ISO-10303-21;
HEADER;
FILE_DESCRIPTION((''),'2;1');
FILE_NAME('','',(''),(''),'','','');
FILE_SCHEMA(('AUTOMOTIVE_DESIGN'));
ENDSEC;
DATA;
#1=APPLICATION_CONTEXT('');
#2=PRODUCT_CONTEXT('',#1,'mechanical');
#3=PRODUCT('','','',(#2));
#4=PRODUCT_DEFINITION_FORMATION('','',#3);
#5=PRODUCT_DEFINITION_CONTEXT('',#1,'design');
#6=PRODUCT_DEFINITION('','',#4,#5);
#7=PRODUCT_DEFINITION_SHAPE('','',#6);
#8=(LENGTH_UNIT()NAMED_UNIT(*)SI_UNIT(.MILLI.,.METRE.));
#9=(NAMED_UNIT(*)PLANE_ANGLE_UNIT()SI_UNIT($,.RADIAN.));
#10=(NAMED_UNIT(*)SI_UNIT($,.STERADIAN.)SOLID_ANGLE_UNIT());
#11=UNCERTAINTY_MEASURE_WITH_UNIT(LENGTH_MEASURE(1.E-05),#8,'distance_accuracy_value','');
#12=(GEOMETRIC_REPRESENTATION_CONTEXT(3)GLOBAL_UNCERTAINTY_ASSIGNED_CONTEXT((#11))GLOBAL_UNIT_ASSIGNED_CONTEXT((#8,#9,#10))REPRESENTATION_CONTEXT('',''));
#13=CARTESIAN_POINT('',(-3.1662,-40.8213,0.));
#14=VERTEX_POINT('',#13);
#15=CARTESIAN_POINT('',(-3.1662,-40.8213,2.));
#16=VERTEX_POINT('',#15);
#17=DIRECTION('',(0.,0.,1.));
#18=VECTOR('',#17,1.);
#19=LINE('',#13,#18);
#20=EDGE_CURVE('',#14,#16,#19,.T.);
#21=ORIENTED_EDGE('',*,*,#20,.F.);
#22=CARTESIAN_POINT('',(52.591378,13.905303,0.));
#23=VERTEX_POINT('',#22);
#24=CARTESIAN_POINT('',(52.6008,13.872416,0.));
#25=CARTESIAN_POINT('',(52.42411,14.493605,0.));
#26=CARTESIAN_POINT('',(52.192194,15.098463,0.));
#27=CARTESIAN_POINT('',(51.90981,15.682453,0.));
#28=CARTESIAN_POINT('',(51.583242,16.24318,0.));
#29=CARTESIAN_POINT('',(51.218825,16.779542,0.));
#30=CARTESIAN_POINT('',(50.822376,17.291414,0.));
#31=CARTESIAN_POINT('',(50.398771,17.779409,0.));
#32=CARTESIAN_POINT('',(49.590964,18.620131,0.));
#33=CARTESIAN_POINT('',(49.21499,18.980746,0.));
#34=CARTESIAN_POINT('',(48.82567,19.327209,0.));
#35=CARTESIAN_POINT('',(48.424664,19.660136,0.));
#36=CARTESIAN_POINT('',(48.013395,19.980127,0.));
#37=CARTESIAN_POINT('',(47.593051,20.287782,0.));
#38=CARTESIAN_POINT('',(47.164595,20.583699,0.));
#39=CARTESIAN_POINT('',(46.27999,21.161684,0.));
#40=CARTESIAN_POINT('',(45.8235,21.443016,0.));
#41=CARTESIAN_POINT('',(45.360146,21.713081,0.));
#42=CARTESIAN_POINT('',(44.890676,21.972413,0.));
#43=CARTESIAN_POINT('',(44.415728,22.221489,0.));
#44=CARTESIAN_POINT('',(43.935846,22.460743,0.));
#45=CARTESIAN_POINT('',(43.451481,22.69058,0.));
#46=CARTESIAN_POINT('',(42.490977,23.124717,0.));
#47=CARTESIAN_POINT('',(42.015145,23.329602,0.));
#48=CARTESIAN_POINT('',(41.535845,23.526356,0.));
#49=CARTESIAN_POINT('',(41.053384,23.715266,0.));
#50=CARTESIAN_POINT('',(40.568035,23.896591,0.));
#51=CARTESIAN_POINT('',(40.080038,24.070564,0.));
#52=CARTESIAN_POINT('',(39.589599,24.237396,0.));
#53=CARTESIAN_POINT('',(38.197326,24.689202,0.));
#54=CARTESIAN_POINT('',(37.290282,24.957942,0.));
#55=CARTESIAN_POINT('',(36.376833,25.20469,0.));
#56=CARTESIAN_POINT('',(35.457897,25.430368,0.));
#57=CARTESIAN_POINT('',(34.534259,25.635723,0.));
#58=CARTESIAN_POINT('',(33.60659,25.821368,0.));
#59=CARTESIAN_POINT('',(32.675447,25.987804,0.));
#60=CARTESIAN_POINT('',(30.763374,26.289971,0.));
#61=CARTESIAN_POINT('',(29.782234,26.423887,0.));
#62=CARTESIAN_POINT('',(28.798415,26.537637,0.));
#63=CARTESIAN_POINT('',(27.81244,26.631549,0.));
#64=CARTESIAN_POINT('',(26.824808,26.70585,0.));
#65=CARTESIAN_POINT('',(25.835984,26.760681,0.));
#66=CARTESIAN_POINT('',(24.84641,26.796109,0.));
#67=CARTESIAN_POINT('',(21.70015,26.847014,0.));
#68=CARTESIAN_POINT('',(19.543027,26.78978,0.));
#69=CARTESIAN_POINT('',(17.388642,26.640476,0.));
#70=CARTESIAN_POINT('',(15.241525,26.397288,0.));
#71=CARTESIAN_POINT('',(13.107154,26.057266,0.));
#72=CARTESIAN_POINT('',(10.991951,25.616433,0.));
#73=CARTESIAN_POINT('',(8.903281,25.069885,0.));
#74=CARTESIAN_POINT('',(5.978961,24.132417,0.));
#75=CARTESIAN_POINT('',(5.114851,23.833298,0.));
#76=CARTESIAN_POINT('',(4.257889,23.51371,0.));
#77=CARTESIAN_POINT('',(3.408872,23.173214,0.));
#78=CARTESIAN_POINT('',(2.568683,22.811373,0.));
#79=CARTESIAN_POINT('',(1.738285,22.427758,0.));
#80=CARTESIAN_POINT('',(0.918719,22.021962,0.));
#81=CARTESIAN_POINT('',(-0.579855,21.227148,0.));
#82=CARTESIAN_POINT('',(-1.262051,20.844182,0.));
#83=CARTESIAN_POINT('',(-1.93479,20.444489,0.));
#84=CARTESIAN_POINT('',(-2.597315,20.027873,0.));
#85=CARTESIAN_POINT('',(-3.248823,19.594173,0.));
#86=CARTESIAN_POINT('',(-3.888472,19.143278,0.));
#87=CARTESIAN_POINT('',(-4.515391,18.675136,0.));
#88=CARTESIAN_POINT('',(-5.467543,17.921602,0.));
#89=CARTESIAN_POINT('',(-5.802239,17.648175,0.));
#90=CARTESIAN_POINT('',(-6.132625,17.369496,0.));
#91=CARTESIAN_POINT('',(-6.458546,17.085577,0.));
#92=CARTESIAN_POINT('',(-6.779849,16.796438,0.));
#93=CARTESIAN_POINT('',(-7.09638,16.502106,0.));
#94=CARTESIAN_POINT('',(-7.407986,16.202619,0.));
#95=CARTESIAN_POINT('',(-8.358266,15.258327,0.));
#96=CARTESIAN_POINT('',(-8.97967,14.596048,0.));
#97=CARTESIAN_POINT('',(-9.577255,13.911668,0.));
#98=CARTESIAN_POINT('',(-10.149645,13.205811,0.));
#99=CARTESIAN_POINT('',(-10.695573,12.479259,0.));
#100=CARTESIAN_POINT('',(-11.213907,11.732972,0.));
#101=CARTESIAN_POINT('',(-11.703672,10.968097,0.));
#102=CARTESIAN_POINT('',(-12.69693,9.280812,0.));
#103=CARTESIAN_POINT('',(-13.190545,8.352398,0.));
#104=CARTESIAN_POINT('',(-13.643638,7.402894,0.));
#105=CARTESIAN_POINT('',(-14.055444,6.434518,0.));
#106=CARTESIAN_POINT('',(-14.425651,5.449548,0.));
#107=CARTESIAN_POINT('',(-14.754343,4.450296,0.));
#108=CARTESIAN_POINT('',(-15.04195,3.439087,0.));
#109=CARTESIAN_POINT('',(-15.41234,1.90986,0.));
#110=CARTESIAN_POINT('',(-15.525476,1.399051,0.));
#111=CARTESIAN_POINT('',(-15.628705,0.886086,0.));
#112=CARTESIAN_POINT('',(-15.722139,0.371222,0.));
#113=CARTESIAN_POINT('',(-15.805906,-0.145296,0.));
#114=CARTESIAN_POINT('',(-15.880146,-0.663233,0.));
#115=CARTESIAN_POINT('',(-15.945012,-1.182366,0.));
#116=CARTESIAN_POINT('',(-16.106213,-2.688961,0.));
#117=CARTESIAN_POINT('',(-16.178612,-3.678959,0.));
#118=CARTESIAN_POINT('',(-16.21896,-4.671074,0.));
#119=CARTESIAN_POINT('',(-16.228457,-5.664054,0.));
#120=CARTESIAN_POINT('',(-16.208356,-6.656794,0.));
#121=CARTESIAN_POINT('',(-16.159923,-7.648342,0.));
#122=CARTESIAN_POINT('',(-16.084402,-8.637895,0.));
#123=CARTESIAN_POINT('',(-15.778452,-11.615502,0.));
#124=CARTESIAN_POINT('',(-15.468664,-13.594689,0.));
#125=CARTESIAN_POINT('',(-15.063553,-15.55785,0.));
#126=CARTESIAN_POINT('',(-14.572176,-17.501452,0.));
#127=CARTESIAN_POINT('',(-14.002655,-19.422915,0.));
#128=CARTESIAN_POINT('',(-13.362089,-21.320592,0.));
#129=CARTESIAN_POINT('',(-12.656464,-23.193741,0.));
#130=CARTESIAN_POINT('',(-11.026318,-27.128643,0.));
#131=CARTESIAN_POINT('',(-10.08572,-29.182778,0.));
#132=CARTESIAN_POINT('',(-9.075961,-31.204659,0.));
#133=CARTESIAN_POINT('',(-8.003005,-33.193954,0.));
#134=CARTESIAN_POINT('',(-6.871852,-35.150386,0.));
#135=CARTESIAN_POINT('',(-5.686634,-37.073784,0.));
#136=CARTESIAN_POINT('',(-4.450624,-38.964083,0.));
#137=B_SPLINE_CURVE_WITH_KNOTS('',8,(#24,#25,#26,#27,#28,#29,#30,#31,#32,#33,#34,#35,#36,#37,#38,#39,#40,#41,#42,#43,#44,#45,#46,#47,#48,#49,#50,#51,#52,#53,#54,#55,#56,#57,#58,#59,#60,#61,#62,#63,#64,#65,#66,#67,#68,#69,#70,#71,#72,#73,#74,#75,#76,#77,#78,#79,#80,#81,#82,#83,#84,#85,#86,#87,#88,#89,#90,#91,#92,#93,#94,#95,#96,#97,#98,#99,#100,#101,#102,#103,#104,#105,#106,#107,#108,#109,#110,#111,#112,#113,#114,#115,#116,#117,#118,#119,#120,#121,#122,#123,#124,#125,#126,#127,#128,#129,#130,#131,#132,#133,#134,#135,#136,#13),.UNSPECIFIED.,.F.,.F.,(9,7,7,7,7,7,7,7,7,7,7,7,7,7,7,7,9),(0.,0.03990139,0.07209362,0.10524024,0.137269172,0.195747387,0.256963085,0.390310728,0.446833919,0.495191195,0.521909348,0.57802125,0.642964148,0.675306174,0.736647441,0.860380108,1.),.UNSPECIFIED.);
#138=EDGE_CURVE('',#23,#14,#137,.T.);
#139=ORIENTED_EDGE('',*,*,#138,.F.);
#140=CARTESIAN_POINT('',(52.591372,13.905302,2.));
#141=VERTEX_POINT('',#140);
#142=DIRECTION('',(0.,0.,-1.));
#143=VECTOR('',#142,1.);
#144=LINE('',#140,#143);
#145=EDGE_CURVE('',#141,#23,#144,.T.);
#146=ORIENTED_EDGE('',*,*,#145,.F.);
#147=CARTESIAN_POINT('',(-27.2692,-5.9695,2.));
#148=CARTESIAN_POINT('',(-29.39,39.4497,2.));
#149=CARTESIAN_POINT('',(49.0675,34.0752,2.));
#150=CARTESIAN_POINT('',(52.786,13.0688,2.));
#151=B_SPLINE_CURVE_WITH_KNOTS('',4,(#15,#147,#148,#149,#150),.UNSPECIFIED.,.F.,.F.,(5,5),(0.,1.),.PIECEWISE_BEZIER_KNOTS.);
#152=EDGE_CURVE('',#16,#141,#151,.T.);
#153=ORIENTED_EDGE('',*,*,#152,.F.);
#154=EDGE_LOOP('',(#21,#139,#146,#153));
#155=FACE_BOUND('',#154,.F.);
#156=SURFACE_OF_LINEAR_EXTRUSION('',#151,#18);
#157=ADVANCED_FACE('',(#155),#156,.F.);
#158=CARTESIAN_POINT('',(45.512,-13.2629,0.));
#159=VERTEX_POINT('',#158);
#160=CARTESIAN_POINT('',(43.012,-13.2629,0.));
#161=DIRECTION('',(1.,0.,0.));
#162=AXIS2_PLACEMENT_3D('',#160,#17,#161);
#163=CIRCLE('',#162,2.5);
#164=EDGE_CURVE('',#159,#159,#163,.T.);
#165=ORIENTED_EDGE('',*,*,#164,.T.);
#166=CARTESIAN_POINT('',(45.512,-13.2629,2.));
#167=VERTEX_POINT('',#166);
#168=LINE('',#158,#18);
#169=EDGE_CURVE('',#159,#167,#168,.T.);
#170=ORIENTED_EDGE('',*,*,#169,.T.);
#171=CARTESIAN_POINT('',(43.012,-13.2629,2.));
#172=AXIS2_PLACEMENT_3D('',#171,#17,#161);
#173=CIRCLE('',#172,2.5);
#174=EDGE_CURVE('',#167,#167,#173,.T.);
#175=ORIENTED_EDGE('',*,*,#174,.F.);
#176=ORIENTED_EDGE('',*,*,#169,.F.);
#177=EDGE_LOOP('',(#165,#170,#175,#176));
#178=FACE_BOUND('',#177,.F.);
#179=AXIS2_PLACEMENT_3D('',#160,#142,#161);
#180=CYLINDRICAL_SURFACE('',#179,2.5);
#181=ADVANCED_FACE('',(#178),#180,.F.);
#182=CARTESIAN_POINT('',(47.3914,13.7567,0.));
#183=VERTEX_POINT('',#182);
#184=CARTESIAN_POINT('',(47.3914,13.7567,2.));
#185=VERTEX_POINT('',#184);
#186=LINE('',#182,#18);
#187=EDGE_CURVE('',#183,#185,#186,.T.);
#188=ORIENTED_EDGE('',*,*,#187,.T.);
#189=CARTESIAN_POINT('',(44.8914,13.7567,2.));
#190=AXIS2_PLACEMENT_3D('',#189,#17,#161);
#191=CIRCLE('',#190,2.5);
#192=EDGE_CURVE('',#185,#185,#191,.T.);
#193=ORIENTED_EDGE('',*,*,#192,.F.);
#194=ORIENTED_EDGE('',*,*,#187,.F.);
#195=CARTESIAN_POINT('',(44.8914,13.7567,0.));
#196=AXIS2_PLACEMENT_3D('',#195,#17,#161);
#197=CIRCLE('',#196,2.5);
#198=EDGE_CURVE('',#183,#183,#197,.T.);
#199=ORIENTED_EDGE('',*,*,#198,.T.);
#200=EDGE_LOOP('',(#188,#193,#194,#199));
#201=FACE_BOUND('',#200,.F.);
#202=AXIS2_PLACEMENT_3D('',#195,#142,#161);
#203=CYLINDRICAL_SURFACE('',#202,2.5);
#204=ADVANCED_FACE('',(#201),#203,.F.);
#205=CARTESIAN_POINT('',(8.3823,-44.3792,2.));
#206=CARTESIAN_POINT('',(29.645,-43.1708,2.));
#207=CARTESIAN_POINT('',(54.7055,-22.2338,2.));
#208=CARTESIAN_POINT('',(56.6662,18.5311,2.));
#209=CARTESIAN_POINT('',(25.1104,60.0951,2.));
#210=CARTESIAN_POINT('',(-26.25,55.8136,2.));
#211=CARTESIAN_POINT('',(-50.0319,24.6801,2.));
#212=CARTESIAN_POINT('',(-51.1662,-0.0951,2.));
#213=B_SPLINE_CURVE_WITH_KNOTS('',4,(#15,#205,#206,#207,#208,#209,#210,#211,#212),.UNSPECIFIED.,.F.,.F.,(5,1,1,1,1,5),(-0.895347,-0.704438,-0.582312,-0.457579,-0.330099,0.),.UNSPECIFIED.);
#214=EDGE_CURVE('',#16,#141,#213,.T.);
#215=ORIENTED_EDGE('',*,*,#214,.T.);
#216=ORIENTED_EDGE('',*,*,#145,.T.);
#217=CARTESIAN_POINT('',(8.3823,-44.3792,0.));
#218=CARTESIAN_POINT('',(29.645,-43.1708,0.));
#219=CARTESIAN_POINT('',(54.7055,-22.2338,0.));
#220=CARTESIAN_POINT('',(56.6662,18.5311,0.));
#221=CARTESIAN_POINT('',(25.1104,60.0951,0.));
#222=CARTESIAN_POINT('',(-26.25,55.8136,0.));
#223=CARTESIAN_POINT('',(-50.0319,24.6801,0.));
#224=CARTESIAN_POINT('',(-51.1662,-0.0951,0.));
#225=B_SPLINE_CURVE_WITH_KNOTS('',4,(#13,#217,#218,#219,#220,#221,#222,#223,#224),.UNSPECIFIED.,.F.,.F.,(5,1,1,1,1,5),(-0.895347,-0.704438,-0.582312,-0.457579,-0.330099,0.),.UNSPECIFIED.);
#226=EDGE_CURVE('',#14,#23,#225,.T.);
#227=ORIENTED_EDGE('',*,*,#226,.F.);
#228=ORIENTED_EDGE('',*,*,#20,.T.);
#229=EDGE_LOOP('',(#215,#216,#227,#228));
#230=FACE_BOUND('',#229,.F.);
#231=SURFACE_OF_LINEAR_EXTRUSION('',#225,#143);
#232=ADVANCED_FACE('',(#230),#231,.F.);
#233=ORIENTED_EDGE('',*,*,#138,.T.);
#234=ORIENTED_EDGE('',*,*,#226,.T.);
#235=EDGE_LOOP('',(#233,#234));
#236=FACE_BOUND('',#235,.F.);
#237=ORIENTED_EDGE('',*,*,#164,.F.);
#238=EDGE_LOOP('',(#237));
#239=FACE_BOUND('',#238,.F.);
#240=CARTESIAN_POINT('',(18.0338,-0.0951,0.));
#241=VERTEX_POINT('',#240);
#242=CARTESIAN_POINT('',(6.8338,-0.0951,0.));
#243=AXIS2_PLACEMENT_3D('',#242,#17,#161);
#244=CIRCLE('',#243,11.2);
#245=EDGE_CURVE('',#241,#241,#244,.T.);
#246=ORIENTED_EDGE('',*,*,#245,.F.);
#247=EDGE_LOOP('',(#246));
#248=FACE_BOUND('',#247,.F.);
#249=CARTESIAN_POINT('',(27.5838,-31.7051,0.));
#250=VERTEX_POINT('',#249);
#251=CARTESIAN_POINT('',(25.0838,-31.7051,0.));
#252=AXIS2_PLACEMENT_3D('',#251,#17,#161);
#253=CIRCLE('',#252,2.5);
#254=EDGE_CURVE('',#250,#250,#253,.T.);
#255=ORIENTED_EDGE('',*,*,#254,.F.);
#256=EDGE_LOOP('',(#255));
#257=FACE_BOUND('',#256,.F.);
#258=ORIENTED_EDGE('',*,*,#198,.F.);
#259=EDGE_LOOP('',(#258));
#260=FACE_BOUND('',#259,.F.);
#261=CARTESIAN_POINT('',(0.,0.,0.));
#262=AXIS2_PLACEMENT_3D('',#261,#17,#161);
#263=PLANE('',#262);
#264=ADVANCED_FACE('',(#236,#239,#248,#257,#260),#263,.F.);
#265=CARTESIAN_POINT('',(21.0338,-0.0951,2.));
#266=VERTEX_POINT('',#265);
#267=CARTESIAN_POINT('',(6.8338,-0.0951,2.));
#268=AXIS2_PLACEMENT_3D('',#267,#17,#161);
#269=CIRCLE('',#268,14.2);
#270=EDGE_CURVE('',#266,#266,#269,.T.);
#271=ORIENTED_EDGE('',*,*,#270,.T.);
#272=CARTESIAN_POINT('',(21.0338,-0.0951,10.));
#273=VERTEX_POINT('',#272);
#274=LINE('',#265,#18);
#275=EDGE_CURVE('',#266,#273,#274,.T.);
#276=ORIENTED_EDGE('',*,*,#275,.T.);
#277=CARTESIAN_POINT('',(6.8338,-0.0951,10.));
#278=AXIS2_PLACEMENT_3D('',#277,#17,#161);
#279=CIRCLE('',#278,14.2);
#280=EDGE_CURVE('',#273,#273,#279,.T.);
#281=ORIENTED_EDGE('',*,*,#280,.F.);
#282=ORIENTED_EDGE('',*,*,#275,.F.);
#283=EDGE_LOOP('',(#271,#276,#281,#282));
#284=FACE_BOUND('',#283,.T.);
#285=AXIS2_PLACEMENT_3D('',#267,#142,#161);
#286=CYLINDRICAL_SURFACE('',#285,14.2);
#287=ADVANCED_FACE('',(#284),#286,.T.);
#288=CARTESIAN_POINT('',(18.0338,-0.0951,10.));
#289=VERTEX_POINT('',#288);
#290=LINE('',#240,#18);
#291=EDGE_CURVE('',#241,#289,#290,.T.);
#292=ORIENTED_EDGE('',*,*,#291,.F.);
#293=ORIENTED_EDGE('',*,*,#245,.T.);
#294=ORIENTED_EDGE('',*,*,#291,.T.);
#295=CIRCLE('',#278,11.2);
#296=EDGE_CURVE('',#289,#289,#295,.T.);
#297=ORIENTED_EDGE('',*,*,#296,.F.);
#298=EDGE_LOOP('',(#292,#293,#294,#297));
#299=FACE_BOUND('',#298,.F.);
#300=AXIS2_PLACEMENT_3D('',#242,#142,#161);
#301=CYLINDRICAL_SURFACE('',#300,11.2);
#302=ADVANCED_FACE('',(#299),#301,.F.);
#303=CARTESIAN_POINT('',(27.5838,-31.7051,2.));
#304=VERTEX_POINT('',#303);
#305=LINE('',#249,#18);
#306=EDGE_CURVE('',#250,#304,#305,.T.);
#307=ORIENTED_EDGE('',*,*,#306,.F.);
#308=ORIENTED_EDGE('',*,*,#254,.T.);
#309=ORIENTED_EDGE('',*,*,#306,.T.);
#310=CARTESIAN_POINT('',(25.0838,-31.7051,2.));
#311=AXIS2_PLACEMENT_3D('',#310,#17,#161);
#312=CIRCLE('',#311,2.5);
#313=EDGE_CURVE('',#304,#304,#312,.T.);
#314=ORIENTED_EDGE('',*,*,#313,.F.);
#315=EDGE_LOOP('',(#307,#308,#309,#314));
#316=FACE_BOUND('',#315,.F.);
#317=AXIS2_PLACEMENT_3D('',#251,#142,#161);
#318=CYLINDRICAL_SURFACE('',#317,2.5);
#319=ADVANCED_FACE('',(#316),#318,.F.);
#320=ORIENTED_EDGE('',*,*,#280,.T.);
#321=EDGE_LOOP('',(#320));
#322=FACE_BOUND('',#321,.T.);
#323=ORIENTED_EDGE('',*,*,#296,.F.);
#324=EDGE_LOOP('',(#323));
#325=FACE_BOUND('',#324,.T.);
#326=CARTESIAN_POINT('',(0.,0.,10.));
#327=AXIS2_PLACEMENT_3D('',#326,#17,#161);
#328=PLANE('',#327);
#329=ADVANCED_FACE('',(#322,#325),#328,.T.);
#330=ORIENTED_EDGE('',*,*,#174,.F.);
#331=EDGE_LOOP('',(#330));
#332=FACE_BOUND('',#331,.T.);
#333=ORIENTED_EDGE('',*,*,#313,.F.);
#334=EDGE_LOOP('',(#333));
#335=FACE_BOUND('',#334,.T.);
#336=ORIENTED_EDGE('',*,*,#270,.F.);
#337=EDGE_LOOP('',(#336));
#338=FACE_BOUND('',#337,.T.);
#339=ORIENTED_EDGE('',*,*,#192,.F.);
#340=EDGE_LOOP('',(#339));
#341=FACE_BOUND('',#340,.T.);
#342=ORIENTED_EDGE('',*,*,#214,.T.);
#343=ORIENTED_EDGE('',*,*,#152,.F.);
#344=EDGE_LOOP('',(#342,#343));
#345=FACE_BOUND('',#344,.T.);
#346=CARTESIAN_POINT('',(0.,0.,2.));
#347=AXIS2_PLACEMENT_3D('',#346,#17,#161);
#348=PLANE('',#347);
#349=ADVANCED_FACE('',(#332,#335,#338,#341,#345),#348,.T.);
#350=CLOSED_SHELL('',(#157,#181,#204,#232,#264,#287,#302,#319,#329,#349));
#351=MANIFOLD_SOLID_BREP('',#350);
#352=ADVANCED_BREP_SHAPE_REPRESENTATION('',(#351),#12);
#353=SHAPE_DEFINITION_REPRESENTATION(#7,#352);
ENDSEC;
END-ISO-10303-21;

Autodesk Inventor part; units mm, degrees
ref_plane "YZ Plane" through (0, 0, 0) normal (1, 0, 0) x (0, 1, 0)
ref_plane "XZ Plane" through (0, 0, 0) normal (0, 1, 0) x (-1, 0, 0)
ref_plane "XY Plane" through (0, 0, 0) normal (0, 0, 1) x (1, 0, 0)
sketch "Sketch1" plane through (0, 0, 0) normal (0, 0, 1) x (1, 0, 0)
  circle A0 centre (25.0838, -31.7051) radius 2.5 projected
  circle A1 centre (43.012, -13.2629) radius 2.5 projected
  circle A2 centre (44.8914, 13.7567) radius 2.5 projected
  circle A3 centre (28.0838, 36.7109) radius 2.5 projected
  circle A4 centre (-0.8935, 43.7288) radius 2.5 projected
  circle A5 centre (-29.5533, 30.4373) radius 2.5 projected
  circle A6 centre (-43.6662, -0.0951) radius 2.5 projected
  circle A7 centre (-47.6662, -52.5951) radius 2.5 projected
  circle A8 centre (-10.6662, -52.5951) radius 2.5 projected
  circle A9 centre (6.8338, -0.0951) radius 4 projected
  line L0 (-3.1662, -60.0951) -> (-3.1662, -40.8213) projected
  spline S0 degree 4 poles (-3.1662, -40.8213) (8.3823, -44.3792) (29.645, -43.1708) (54.7055, -22.2338) (56.6662, 18.5311) (25.1104, 60.0951) (-26.25, 55.8136) (-50.0319, 24.6801) (-51.1662, -0.0951) knots -0.895347 -0.895347 -0.895347 -0.895347 -0.895347 -0.704438 -0.582312 -0.457579 -0.330099 0 0 0 0 0 projected
  line L1 (-51.1662, -0.0951) -> (-56.6662, -60.0951) projected
  line L2 (-56.6662, -60.0951) -> (-3.1662, -60.0951) projected
  circle A10 centre (6.8338, -0.0951) radius 11.2
  line L3 (-3.1662, -40.8213) -> (-29.9162, -34.2051) construction
  line L4 (-29.9162, -34.2051) -> (-46.1662, -23.5051) construction
  line L5 (-46.1662, -23.5051) -> (-51.1662, -0.0951) construction
  spline S1 degree 3 poles (-3.1662, -40.8213) (-29.9162, -34.2051) (-46.1662, -23.5051) (-51.1662, -0.0951) knots 1 1 1 1 2 2 2 2
  point P0 (0, 0)
  dimension "d0" = 22.4
extrude "Extrusion1" add sketch "Sketch1" along normal blind 2 contours S1 S0
sketch "Sketch2" plane through (0, 0, 2) normal (0, 0, 1) x (1, 0, 0)
  point P0 (0, 0)
sketch "Sketch3" plane through (0, 0, 2) normal (0, 0, 1) x (1, 0, 0)
  circle A0 centre (6.8338, -0.0951) radius 11.2 projected
  circle A1 centre (6.8338, -0.0951) radius 14.2
  point P0 (0, 0)
  dimension "d3" = 3
extrude "Extrusion2" add sketch "Sketch3" along normal blind 8
sketch "Sketch4" plane through (0, 0, 2) normal (0, 0, 1) x (1, 0, 0)
  spline S0 degree 4 poles (-3.1662, -40.8213) (-27.2692, -5.9695) (-29.39, 39.4497) (49.0675, 34.0752) (52.786, 13.0688) knots 0 0 0 0 0 1 1 1 1 1
  circle A0 centre (6.8338, -0.0951) radius 14.2 projected
  spline S1 degree 4 poles (-3.1662, -40.8213) (8.3823, -44.3792) (29.645, -43.1708) (54.7055, -22.2338) (56.6662, 18.5311) (25.1104, 60.0951) (-26.25, 55.8136) (-50.0319, 24.6801) (-51.1662, -0.0951) knots 0 0 0 0 0 0.213223 0.349624 0.488937 0.631318 1 1 1 1 1 projected
  spline S2 degree 3 poles (-51.1662, -0.0951) (-46.1662, -23.5051) (-29.9162, -34.2051) (-3.1662, -40.8213) knots 0 0 0 0 1 1 1 1 projected
  circle A1 centre (-43.6662, -0.0951) radius 2.5 projected
  circle A2 centre (-29.5533, 30.4373) radius 2.5 projected
  circle A3 centre (-0.8935, 43.7288) radius 2.5 projected
  circle A4 centre (28.0838, 36.7109) radius 2.5 projected
  circle A5 centre (44.8914, 13.7567) radius 2.5 projected
  circle A6 centre (43.012, -13.2629) radius 2.5 projected
  circle A7 centre (25.0838, -31.7051) radius 2.5 projected
  point P0 (0, 0)
  point P1 (-15.7615, 0.0764)
  point P2 (0.4982, 21.7961)
  point P3 (35.8374, 25.3182)
  point P4 (52.5916, 13.9044)
extrude "Extrusion3" cut sketch "Sketch4" against normal blind 8 contours S2 S1 S0
properties part number "Estructura"
